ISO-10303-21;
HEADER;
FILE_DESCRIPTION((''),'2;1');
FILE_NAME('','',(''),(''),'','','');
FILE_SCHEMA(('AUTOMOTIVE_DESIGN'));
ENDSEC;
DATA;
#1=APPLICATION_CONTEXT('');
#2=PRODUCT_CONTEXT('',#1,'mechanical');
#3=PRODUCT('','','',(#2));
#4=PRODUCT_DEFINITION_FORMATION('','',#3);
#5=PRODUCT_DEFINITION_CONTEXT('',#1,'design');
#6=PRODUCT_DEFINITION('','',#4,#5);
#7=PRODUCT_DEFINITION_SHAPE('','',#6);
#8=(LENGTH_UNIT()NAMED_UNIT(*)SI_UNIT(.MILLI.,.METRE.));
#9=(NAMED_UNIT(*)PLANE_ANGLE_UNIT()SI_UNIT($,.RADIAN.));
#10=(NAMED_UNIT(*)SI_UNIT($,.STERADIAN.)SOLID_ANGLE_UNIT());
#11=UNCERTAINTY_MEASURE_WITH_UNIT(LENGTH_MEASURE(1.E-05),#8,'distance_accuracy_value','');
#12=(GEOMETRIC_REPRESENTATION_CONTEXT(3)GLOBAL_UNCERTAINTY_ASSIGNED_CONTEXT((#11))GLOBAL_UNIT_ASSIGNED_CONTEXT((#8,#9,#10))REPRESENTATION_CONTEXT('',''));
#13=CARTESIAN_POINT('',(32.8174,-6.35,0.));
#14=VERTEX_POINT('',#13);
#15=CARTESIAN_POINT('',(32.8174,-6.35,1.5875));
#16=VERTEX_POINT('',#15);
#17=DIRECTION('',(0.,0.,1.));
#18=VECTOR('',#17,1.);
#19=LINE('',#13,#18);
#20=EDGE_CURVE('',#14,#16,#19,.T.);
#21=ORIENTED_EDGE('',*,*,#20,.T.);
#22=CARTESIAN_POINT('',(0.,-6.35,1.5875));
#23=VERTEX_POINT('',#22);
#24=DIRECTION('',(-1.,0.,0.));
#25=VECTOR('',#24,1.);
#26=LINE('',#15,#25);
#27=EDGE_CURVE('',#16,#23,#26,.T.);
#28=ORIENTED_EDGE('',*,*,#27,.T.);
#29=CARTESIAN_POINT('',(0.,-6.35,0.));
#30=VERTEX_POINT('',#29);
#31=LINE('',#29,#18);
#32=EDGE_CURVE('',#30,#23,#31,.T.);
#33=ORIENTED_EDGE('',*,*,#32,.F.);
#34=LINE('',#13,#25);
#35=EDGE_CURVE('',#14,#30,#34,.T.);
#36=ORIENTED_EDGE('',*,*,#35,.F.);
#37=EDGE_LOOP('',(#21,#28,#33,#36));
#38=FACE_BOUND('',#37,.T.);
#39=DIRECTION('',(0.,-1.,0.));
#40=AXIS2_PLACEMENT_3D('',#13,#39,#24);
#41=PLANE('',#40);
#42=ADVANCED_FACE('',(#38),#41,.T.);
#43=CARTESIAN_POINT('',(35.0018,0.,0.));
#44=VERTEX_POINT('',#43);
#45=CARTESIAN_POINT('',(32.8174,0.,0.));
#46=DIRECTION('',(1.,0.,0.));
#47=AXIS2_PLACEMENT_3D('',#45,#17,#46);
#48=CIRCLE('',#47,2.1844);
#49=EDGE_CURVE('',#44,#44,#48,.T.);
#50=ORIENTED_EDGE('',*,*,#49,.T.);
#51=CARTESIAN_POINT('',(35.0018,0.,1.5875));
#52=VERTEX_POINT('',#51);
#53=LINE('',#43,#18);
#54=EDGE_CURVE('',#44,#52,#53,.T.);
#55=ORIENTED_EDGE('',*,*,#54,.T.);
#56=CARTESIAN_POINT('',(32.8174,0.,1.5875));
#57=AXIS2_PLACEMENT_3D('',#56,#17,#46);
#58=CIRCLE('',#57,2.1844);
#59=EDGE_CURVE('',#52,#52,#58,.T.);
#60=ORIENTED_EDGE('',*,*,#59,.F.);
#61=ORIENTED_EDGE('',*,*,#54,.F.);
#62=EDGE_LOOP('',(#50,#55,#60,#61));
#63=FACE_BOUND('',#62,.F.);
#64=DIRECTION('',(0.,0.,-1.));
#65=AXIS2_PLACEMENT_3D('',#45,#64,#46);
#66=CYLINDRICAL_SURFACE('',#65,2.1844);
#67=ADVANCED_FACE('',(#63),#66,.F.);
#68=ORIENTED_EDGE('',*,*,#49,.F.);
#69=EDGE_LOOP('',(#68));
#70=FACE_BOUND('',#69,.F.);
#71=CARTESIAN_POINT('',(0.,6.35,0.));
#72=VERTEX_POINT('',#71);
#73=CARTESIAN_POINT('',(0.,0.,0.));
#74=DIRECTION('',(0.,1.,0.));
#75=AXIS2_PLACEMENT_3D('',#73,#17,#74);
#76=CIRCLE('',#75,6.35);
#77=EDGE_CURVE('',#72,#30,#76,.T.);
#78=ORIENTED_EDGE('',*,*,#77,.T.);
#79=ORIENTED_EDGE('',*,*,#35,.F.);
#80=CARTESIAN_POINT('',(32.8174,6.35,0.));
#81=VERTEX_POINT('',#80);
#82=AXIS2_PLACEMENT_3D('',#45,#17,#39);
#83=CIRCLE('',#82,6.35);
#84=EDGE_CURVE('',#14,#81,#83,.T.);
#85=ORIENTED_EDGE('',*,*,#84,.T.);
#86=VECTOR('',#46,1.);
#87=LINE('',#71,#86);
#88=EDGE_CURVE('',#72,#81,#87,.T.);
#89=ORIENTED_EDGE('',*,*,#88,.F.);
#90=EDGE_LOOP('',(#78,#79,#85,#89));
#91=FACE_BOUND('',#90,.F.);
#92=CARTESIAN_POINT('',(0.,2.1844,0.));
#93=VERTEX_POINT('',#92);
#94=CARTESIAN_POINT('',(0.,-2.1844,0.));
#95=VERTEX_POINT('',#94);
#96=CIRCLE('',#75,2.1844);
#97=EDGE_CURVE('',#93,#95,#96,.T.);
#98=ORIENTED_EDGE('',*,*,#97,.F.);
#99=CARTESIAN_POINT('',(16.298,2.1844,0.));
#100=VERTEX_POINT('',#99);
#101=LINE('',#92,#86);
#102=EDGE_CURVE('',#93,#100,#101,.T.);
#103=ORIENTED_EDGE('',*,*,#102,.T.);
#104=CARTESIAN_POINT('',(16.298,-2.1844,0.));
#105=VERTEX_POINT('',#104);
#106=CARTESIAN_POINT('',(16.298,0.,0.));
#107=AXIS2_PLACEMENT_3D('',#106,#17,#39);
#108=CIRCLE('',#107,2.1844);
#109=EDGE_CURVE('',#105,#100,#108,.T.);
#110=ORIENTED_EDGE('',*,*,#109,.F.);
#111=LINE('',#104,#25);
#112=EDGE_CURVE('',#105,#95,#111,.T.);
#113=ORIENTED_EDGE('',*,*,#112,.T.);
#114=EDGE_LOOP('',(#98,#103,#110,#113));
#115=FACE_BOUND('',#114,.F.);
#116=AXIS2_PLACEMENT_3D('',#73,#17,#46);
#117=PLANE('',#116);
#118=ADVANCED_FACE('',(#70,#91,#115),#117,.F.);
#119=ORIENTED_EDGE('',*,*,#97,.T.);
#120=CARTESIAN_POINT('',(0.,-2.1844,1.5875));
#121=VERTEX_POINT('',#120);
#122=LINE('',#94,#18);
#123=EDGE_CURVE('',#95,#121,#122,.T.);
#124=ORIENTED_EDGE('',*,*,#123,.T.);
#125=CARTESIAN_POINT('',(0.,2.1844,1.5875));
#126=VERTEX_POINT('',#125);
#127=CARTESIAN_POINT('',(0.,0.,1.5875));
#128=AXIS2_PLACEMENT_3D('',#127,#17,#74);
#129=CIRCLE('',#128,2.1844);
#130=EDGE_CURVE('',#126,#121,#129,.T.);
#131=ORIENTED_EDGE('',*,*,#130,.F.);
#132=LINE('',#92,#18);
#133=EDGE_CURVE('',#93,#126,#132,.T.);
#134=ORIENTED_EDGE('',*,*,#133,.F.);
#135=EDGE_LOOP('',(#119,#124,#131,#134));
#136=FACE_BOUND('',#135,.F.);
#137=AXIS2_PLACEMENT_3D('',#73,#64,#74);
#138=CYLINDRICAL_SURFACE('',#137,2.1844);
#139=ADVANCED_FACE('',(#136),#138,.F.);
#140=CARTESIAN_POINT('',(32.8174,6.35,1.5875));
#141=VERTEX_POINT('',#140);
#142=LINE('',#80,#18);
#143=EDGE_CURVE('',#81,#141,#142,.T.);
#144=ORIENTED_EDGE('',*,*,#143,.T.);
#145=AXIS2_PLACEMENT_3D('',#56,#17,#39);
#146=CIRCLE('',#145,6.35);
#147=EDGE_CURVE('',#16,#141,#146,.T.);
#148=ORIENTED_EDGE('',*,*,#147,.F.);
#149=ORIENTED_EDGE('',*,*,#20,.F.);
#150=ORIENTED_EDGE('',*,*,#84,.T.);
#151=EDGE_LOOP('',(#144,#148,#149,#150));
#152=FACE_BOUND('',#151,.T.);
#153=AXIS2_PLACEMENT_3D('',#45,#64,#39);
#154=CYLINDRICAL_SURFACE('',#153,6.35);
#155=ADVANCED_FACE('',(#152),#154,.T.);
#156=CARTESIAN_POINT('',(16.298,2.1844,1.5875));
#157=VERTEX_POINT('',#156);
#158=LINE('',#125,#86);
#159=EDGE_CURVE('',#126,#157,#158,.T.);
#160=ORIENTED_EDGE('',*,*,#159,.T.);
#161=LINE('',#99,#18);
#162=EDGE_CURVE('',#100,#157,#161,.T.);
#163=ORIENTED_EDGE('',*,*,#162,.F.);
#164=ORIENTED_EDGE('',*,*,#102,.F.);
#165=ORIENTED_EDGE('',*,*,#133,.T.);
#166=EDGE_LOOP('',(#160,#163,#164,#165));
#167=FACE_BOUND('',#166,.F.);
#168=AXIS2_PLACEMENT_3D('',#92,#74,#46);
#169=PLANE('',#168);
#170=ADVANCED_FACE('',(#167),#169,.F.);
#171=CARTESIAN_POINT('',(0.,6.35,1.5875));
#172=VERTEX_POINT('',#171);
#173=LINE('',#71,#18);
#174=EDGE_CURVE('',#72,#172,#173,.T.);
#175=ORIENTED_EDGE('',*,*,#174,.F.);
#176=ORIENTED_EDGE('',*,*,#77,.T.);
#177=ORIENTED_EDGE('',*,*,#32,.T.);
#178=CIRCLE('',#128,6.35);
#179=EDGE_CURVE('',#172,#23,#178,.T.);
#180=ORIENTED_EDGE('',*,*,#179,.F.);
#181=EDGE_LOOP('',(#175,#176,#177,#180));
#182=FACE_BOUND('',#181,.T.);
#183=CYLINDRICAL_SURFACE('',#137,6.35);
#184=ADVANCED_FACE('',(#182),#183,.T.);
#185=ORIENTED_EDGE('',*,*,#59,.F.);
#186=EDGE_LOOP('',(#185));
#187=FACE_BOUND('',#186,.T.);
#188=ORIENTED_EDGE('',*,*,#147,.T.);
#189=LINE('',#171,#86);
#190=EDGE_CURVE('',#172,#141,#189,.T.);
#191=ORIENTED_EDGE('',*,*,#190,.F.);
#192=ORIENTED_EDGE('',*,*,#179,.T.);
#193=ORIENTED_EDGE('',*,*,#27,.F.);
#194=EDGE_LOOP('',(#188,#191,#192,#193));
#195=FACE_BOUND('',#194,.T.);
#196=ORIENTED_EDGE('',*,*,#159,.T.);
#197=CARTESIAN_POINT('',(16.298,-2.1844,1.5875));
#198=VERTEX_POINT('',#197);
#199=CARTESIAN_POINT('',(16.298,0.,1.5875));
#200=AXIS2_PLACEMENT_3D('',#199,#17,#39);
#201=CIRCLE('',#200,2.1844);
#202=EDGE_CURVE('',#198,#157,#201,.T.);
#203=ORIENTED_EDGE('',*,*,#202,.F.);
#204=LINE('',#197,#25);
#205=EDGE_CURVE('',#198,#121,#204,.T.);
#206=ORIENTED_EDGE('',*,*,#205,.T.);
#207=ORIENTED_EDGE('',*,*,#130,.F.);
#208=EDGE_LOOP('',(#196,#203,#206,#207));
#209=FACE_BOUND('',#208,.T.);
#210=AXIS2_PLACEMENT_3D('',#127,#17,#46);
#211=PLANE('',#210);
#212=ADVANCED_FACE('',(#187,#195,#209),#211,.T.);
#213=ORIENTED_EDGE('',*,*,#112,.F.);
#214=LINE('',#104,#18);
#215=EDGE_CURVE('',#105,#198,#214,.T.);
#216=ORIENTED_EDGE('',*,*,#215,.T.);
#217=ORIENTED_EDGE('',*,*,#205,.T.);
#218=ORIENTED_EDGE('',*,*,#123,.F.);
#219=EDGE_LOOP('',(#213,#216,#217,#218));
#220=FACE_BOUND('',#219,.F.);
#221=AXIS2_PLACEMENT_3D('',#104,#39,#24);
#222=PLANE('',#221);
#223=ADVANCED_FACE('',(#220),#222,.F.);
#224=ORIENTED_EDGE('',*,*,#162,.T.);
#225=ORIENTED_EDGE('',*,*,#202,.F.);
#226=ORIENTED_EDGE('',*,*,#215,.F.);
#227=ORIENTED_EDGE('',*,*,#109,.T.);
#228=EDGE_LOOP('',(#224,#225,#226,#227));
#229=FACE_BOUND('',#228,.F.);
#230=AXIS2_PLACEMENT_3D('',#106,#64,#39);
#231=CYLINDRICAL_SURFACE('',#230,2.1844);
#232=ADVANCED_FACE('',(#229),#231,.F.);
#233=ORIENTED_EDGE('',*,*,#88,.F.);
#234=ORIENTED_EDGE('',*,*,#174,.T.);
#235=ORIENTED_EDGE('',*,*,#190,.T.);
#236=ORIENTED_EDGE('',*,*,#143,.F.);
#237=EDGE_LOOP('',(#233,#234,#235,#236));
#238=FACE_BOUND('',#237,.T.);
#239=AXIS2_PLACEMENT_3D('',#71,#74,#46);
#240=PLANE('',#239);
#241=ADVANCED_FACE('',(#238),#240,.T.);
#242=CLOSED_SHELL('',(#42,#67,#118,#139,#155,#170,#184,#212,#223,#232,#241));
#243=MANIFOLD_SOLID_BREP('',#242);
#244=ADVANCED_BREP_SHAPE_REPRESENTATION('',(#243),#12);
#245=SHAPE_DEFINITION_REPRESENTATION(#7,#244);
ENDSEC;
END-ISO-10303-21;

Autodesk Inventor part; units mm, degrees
ref_plane "YZ Plane" through (0, 0, 0) normal (1, 0, 0) x (0, 1, 0)
ref_plane "XZ Plane" through (0, 0, 0) normal (0, 1, 0) x (-1, 0, 0)
ref_plane "XY Plane" through (0, 0, 0) normal (0, 0, 1) x (1, 0, 0)
sketch "main" plane through (0, 0, 0) normal (0, 0, 1) x (1, 0, 0)
  circle A0 centre (16.9271, 1.4076) radius 2.1844
  arc A1 (-15.8903, 3.592) -> (-15.8903, -0.7768) centre (-15.8903, 1.4076) ccw
  arc A2 (16.9271, -4.9424) -> (16.9271, 7.7576) centre (16.9271, 1.4076) ccw
  arc A3 (-15.8903, 7.7576) -> (-15.8903, -4.9424) centre (-15.8903, 1.4076) ccw
  line L0 (-15.8903, 7.7576) -> (16.9271, 7.7576)
  line L1 (16.9271, -4.9424) -> (-15.8903, -4.9424)
  arc A4 (0.4077, -0.7768) -> (0.4077, 3.592) centre (0.4077, 1.4076) ccw
  line L2 (-15.8903, 3.592) -> (0.4077, 3.592)
  line L3 (0.4077, -0.7768) -> (-15.8903, -0.7768)
  point P0 (-1.0706, 1.6197)
  dimension "d0" = 12.7
  dimension "d1" = 12.7
  dimension "d3" = 32.8174
  dimension "d4" = 4.3688
  dimension "d5" = 4.3688
sketch "Sketch1" plane through (0, 0, 0) normal (0, 0, 1) x (1, 0, 0)
  circle A0 centre (32.8174, 0) radius 2.1844
  arc A1 (0, 2.1844) -> (0, -2.1844) centre (0, 0) ccw
  arc A2 (32.8174, -6.35) -> (32.8174, 6.35) centre (32.8174, 0) ccw
  arc A3 (0, 6.35) -> (0, -6.35) centre (0, 0) ccw
  line L0 (0, 6.35) -> (32.8174, 6.35)
  line L1 (32.8174, -6.35) -> (0, -6.35)
  arc A4 (16.298, -2.1844) -> (16.298, 2.1844) centre (16.298, 0) ccw
  line L2 (0, 2.1844) -> (16.298, 2.1844)
  line L3 (16.298, -2.1844) -> (0, -2.1844)
extrude "Extrusion1" add sketch "Sketch1" along normal blind 1.5875
properties part number "Hardstop Gusset" material "Acetal Resin, White"
